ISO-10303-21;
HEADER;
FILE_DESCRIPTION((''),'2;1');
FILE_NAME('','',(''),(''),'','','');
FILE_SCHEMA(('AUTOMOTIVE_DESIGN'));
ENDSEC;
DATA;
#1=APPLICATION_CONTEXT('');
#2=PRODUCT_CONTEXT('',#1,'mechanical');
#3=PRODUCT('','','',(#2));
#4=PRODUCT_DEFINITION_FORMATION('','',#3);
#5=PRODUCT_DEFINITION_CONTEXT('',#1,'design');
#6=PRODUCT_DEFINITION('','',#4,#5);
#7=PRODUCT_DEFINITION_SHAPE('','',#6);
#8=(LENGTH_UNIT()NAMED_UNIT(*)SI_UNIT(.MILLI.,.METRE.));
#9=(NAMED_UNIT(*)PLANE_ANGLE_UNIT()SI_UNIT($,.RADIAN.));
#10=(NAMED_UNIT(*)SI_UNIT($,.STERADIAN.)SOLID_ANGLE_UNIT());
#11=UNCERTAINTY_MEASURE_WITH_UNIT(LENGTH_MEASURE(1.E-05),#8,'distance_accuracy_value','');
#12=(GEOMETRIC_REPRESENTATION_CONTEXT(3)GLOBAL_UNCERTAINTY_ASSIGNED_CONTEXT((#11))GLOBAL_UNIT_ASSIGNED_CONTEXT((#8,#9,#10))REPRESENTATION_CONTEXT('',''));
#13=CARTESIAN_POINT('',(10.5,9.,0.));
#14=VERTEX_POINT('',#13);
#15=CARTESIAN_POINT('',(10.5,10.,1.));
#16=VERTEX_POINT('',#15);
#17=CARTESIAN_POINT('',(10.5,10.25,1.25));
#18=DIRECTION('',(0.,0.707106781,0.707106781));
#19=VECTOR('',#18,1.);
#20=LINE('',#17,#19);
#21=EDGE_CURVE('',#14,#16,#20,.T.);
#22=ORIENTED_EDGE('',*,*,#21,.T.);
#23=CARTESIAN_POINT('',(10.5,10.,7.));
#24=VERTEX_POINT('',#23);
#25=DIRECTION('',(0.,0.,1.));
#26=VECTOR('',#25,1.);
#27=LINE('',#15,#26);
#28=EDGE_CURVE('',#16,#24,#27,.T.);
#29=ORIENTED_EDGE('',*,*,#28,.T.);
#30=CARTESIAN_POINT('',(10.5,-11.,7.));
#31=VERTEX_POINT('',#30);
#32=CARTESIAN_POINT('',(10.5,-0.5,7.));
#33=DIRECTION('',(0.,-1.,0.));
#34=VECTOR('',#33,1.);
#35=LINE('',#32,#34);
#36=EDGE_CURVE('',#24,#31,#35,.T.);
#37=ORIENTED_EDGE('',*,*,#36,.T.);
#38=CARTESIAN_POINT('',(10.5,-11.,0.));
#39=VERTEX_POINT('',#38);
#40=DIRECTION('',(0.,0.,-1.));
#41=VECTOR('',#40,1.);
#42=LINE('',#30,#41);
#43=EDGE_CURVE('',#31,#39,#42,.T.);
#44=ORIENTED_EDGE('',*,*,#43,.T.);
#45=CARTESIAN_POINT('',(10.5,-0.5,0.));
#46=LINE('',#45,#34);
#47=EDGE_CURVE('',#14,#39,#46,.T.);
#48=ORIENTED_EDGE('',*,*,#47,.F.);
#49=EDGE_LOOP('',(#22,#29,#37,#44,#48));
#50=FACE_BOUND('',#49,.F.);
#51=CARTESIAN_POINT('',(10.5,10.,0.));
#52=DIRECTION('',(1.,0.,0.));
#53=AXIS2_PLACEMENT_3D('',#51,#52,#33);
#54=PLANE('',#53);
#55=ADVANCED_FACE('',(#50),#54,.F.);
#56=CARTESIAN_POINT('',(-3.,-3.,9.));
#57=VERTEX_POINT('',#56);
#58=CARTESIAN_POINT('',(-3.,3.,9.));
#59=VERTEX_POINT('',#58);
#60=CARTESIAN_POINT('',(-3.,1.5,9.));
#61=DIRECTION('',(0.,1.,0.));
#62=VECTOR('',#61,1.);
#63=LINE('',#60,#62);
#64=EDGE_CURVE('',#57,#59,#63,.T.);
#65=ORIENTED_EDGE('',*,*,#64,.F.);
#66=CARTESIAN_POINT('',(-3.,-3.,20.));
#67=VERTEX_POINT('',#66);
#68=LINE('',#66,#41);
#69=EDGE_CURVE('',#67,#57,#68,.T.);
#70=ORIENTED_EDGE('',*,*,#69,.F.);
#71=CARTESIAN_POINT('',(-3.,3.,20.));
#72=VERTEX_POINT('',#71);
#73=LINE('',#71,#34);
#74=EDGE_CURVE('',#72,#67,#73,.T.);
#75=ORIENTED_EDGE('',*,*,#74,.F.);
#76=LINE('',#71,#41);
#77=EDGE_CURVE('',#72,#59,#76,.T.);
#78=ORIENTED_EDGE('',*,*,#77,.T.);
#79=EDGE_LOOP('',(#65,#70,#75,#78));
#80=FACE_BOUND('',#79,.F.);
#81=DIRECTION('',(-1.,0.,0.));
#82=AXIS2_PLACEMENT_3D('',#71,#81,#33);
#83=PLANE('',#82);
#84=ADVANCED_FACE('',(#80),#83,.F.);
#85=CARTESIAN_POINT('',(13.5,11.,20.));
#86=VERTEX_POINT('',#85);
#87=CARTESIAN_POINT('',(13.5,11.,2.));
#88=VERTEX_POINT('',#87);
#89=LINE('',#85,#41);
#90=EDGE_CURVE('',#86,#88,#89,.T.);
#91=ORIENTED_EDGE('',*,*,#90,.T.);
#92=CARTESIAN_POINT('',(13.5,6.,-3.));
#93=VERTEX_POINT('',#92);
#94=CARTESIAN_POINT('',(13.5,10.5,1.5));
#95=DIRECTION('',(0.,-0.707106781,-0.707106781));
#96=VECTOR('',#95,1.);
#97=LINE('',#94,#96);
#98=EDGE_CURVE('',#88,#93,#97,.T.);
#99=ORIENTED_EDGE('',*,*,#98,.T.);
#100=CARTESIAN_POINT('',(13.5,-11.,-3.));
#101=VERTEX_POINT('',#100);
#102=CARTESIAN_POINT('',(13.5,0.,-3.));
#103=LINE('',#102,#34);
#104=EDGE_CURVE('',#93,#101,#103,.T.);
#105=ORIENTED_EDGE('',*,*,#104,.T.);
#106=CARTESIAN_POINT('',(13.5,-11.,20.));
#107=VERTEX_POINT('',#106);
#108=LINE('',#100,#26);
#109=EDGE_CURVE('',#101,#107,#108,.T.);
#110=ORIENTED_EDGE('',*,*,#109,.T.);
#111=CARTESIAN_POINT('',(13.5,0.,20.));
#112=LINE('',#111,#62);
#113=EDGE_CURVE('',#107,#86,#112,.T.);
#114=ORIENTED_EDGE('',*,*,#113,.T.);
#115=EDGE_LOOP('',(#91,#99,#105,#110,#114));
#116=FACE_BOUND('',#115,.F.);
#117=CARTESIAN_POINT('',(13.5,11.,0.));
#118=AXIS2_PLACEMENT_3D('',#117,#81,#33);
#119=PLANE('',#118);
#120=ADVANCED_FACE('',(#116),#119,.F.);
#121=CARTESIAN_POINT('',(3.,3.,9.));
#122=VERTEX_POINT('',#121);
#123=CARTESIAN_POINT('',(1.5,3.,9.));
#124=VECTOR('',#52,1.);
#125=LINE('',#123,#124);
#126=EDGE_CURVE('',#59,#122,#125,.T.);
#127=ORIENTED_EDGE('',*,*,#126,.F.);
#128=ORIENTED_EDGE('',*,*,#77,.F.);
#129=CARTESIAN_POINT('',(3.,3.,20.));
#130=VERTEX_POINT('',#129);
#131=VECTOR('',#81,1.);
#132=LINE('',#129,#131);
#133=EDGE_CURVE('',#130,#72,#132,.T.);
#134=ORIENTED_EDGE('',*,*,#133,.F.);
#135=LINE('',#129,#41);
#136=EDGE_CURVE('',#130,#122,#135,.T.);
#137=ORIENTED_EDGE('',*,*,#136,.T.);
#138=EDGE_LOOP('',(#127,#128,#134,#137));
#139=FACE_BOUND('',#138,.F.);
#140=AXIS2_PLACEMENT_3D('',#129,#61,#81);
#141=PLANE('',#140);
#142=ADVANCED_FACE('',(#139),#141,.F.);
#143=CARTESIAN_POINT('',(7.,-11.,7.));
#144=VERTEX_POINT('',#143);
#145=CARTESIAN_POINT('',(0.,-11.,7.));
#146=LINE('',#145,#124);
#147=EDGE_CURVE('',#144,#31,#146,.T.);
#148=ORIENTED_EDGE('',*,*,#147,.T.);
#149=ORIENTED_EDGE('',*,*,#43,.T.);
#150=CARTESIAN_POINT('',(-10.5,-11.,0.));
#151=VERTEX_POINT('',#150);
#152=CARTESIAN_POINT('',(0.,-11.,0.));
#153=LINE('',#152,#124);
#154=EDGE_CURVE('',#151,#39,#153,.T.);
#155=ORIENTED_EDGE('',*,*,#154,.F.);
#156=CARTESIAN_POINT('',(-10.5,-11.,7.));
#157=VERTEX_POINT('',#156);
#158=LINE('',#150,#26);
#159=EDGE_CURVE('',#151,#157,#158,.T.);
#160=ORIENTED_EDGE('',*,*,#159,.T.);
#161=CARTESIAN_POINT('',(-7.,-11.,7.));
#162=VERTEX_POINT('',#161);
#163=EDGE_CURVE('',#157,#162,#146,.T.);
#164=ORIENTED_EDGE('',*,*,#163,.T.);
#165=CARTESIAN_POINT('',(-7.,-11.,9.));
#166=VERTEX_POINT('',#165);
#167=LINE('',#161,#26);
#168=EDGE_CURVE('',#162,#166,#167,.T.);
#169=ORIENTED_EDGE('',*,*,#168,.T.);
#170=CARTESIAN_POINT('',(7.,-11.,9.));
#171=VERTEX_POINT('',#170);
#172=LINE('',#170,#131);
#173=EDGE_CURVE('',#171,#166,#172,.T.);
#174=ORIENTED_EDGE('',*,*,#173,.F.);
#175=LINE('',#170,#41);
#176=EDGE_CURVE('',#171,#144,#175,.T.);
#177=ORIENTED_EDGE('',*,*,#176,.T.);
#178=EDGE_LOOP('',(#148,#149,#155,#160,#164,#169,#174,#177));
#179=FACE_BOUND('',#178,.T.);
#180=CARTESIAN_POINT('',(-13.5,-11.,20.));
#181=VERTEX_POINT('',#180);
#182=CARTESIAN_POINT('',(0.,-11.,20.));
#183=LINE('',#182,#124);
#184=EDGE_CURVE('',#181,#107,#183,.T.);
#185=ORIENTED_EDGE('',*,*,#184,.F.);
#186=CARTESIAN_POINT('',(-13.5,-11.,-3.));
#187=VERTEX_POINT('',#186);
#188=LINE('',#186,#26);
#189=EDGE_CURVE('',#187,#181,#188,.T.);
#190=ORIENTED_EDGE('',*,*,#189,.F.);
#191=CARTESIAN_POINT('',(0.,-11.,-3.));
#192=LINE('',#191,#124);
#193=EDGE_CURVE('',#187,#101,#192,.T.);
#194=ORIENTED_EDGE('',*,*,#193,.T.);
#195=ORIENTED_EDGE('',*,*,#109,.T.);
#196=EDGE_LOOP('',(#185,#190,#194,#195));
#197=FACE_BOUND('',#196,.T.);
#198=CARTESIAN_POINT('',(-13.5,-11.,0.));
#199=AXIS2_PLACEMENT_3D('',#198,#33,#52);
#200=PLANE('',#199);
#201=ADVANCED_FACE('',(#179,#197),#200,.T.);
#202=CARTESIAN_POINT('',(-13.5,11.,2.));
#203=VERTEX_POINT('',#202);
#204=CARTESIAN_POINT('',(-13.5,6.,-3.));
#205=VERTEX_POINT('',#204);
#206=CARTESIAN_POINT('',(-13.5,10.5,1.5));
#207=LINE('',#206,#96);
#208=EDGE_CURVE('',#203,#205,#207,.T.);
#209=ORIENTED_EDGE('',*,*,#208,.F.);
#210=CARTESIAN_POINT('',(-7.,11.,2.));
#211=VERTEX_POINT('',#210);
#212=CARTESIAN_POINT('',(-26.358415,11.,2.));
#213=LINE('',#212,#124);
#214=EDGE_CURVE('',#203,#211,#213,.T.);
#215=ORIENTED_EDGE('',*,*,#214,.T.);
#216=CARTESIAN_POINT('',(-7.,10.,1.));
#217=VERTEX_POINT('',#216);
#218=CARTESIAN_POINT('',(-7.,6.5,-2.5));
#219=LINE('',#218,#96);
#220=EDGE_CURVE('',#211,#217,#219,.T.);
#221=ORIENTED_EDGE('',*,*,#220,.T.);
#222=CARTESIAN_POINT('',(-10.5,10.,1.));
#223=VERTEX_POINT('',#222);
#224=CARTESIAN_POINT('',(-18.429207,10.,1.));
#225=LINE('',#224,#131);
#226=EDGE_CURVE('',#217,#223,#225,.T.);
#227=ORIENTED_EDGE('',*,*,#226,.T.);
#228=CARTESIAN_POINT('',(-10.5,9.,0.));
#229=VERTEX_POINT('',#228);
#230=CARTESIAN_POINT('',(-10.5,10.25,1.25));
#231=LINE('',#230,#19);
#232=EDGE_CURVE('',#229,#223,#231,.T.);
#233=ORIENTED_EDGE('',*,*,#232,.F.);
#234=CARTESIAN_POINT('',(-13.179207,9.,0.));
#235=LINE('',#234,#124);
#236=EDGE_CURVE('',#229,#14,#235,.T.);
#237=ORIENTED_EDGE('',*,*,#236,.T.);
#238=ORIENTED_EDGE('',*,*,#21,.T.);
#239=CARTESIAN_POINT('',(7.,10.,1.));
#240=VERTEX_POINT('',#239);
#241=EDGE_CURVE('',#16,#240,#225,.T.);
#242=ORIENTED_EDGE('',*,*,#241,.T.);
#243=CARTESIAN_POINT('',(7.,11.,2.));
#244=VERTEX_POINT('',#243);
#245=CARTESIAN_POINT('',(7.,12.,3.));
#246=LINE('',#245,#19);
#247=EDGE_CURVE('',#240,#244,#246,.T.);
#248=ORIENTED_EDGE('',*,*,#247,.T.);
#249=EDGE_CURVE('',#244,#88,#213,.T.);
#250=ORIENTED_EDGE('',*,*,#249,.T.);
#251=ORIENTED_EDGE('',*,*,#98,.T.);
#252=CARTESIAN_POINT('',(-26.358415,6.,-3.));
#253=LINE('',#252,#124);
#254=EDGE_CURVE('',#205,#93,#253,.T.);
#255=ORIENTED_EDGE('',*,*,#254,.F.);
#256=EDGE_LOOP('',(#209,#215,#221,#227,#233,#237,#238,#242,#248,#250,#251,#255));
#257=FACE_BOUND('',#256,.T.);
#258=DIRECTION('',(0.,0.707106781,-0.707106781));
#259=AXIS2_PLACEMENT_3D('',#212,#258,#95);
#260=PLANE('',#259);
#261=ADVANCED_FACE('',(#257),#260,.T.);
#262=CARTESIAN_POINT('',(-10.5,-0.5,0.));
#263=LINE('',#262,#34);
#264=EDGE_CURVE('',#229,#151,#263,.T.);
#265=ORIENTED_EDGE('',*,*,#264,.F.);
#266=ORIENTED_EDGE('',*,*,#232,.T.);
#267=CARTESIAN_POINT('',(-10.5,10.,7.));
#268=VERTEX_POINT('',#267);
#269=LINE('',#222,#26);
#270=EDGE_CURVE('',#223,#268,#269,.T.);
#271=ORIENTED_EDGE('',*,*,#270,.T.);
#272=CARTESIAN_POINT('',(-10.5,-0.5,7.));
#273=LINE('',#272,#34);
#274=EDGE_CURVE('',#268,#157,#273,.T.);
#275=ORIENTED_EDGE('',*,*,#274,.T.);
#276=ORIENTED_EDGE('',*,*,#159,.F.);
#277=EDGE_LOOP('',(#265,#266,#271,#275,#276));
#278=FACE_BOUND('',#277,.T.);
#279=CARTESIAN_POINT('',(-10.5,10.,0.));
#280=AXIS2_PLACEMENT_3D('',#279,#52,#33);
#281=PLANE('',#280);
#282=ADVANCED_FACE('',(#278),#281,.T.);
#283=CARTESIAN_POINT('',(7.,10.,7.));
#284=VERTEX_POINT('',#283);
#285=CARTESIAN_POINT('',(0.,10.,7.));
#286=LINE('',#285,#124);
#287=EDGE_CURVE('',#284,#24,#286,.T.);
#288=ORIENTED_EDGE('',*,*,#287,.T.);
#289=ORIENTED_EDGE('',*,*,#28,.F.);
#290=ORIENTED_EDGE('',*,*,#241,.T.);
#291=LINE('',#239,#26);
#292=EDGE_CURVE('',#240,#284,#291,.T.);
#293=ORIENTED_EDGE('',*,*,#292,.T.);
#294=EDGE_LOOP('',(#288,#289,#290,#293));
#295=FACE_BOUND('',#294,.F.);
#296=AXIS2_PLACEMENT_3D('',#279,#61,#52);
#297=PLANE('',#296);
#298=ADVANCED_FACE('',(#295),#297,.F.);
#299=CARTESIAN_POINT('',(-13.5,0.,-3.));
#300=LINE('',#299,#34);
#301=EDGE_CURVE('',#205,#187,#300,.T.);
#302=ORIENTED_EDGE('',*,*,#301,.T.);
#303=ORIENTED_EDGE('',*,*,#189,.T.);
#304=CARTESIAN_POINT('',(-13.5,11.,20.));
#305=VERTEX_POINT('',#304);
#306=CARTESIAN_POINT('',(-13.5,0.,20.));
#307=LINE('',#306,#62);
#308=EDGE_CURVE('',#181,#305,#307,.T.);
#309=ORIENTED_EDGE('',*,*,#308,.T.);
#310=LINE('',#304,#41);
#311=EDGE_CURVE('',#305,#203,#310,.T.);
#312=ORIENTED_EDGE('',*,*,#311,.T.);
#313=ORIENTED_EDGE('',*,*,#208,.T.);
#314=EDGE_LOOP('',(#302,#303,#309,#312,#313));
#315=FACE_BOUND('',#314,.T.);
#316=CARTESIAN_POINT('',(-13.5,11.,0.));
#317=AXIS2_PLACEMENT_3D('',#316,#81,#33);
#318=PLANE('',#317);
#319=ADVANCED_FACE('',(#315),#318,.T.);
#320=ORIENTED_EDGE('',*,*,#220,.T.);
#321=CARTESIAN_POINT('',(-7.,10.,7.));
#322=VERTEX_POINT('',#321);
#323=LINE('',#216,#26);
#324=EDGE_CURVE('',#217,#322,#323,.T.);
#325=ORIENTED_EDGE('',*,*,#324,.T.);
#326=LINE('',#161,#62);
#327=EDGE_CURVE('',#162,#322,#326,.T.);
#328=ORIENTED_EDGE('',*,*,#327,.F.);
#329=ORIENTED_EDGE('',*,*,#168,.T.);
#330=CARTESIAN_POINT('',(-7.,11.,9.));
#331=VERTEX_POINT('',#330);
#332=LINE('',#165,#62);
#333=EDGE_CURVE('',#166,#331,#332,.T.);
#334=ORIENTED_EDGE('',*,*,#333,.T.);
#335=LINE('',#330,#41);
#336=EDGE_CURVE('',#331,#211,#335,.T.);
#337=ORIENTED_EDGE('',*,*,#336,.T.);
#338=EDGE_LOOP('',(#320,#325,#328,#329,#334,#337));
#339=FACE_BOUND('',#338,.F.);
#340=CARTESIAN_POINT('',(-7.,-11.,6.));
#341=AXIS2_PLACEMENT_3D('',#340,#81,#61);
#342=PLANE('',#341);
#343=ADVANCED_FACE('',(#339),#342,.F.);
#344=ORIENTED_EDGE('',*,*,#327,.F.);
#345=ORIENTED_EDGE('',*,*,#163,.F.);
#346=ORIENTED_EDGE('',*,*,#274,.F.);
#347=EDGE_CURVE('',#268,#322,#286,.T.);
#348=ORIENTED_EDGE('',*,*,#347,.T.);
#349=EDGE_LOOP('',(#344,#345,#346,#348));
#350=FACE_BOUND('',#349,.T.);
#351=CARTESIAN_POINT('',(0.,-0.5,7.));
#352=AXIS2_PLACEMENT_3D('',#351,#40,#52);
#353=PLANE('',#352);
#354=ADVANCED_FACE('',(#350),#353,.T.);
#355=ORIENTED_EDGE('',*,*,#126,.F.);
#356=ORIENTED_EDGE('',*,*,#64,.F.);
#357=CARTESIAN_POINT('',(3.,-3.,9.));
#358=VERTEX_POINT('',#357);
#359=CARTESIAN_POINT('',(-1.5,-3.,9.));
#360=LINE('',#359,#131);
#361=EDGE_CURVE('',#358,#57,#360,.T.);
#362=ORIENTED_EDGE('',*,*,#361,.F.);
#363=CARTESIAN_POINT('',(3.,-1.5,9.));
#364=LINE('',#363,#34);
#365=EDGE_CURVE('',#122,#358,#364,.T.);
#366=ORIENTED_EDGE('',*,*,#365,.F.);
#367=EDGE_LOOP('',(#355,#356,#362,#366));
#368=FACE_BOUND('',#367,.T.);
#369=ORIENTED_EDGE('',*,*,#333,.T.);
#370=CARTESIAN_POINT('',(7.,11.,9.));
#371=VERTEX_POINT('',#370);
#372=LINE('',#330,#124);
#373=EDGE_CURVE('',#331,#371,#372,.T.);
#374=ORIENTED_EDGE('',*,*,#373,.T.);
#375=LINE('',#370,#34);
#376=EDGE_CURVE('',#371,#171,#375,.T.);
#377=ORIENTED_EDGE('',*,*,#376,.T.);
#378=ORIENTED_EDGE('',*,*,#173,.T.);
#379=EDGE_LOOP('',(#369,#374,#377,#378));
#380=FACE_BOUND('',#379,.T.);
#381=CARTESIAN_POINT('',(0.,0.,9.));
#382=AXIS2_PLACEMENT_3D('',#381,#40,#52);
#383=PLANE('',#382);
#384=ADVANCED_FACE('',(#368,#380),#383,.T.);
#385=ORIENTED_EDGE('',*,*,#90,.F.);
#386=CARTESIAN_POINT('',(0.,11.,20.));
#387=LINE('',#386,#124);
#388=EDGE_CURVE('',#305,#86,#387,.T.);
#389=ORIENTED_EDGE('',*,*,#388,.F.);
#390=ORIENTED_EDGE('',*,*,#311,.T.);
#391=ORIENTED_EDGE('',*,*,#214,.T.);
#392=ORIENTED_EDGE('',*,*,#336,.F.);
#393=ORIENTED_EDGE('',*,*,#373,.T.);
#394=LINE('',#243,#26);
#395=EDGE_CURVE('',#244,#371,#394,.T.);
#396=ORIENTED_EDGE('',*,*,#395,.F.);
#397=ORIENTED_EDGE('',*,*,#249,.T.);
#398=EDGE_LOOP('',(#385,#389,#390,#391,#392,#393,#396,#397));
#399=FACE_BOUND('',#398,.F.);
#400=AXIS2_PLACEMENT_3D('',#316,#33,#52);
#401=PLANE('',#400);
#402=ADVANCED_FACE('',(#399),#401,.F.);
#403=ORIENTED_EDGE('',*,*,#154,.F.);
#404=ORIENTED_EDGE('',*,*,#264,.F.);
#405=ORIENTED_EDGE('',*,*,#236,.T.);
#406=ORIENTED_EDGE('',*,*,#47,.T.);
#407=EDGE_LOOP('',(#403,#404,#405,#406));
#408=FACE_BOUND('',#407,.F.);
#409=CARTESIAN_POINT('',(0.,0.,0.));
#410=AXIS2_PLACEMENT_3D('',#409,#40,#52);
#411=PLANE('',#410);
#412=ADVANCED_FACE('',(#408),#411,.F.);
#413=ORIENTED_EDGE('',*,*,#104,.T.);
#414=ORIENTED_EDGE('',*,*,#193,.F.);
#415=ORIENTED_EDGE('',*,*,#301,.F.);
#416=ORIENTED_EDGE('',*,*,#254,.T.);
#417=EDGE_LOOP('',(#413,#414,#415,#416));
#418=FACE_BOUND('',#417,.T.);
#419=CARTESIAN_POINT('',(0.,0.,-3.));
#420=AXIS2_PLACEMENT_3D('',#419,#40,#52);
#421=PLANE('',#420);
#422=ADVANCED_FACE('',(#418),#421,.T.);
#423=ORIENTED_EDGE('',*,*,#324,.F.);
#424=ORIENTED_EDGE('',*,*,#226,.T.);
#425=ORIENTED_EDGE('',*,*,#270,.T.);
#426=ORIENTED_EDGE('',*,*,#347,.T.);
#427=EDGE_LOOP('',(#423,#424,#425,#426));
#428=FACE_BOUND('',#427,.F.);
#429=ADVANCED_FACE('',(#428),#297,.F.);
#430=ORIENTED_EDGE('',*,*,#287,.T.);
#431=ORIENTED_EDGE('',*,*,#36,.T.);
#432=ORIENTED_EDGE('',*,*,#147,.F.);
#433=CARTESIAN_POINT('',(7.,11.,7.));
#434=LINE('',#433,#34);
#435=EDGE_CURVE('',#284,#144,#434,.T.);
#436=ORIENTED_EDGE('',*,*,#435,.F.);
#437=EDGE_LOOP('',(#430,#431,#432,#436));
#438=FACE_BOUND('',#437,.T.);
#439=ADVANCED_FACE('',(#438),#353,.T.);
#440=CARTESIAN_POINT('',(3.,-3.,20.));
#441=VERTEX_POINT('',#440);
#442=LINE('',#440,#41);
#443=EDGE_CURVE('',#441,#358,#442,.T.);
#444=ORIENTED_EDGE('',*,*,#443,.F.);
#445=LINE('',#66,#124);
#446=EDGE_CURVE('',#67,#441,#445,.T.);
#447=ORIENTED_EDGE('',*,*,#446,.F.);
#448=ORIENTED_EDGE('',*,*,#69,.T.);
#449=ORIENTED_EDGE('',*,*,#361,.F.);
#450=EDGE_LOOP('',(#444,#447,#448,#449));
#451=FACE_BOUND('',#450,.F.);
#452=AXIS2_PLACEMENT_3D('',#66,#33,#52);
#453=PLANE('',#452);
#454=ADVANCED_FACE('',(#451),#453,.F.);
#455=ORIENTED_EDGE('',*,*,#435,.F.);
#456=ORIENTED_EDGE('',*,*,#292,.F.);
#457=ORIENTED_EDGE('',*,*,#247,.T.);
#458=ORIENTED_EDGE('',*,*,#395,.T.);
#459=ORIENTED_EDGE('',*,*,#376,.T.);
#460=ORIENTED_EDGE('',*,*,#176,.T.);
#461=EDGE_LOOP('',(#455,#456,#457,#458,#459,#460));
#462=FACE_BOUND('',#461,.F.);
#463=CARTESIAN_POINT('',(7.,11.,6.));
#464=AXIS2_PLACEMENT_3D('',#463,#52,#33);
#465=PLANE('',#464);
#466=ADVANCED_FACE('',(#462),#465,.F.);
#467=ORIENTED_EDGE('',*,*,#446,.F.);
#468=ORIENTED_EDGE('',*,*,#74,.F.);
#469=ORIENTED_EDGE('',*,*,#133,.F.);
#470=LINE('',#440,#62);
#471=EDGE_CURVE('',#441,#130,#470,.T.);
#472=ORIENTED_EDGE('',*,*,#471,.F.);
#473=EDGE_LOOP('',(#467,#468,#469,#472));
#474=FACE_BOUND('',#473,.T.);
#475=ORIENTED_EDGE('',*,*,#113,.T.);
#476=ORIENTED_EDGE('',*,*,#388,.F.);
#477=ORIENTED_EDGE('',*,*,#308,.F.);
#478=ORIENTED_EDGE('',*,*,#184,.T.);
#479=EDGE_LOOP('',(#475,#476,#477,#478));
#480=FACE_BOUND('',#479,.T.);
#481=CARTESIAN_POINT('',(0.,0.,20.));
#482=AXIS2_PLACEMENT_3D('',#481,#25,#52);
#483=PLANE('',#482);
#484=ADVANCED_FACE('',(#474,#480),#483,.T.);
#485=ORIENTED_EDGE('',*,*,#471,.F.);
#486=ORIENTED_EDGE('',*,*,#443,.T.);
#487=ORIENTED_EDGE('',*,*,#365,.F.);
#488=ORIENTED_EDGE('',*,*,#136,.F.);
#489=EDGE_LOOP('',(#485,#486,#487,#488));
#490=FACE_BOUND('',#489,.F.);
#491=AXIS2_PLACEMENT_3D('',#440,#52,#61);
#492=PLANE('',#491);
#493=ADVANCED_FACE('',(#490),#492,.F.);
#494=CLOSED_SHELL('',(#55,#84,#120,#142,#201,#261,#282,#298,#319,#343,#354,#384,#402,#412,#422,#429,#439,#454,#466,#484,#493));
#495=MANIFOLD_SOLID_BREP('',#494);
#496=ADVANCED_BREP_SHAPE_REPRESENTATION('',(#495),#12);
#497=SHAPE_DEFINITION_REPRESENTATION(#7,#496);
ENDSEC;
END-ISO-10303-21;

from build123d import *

# Parameters (mm, degrees)
F0_W         = 27
F0_H         = 22
F1_DEPTH     = 20
F2_W         = 21
F2_H         = 21
F3_DEPTH     = 6
F5_DEPTH     = 2
F7_DEPTH     = 20
F8_DEPTH     = 6
F9_W         = 27
F9_H         = 22
F10_DEPTH    = 3
F11_T1_DEPTH = 52.7168298797
F12_DEPTH    = 1


# Not quite as in the source:
# - a fillet or chamfer that OpenCascade refuses, or shapes differently, is made with other operations: its cross-section is extruded or revolved along the edge and cut away or added


with BuildPart() as f1:
    # F0 (on Top) → F1 (new body)
    with BuildSketch(Plane.XY):
        Rectangle(F0_W, F0_H)
    extrude(amount=F1_DEPTH)

    # F2 (on face) → F3 (cut)
    with BuildSketch(Plane(origin=(0, 0, 0), x_dir=(1, 0, 0), z_dir=(0, 0, -1))):
        with Locations((0, 0.5)):
            Rectangle(F2_W, F2_H)
    extrude(amount=-F3_DEPTH, mode=Mode.SUBTRACT)

    # F4 (on face) → F5 (cut)
    with BuildSketch(Plane(origin=(0, 0, 6), x_dir=(1, 0, 0), z_dir=(0, 0, -1))):
        Polygon((0, 11), (-7, 11), (-7, -11), (7, -11), (7, 11), align=None)
    extrude(amount=-F5_DEPTH, mode=Mode.SUBTRACT)

    # F6 (on face) → F7 (cut)
    with BuildSketch(Plane.XY.offset(20)):
        Polygon((0, -3), (3, -3), (3, 3), (-3, 3), (-3, -3), align=None)
    extrude(amount=-F7_DEPTH, mode=Mode.SUBTRACT)

    # F8 (cut): a face of the model
    f8_faces = [f1.faces().sort_by_distance(p)[0] for p in [
        (0, 10.5, 6),
    ]]
    extrude(f8_faces, amount=-F8_DEPTH, mode=Mode.SUBTRACT)

    # F9 (on face) → F10 (join)
    with BuildSketch(Plane(origin=(0, 0, 0), x_dir=(1, 0, 0), z_dir=(0, 0, -1))):
        Rectangle(F9_W, F9_H)
    extrude(amount=F10_DEPTH)

    # F11: chamfer of 5 on 1 edges, made by hand

    # F11_s2 → F11_t1 (cut)
    with BuildSketch(Plane.YZ.offset(-26.3584149398)):
        Polygon((11, 2), (6, -3), (11, -3), align=None)
    extrude(amount=F11_T1_DEPTH, mode=Mode.SUBTRACT)

    # F12 (cut): faces of the model
    f12_faces = [f1.faces().sort_by_distance(p)[0] for p in [
        (8.75, -0.5, 6),
        (-6.7392319038, 0, 8),
        (-8.75, -0.5, 6),
    ]]
    extrude(f12_faces, amount=-F12_DEPTH, mode=Mode.SUBTRACT)


solid = f1.part
